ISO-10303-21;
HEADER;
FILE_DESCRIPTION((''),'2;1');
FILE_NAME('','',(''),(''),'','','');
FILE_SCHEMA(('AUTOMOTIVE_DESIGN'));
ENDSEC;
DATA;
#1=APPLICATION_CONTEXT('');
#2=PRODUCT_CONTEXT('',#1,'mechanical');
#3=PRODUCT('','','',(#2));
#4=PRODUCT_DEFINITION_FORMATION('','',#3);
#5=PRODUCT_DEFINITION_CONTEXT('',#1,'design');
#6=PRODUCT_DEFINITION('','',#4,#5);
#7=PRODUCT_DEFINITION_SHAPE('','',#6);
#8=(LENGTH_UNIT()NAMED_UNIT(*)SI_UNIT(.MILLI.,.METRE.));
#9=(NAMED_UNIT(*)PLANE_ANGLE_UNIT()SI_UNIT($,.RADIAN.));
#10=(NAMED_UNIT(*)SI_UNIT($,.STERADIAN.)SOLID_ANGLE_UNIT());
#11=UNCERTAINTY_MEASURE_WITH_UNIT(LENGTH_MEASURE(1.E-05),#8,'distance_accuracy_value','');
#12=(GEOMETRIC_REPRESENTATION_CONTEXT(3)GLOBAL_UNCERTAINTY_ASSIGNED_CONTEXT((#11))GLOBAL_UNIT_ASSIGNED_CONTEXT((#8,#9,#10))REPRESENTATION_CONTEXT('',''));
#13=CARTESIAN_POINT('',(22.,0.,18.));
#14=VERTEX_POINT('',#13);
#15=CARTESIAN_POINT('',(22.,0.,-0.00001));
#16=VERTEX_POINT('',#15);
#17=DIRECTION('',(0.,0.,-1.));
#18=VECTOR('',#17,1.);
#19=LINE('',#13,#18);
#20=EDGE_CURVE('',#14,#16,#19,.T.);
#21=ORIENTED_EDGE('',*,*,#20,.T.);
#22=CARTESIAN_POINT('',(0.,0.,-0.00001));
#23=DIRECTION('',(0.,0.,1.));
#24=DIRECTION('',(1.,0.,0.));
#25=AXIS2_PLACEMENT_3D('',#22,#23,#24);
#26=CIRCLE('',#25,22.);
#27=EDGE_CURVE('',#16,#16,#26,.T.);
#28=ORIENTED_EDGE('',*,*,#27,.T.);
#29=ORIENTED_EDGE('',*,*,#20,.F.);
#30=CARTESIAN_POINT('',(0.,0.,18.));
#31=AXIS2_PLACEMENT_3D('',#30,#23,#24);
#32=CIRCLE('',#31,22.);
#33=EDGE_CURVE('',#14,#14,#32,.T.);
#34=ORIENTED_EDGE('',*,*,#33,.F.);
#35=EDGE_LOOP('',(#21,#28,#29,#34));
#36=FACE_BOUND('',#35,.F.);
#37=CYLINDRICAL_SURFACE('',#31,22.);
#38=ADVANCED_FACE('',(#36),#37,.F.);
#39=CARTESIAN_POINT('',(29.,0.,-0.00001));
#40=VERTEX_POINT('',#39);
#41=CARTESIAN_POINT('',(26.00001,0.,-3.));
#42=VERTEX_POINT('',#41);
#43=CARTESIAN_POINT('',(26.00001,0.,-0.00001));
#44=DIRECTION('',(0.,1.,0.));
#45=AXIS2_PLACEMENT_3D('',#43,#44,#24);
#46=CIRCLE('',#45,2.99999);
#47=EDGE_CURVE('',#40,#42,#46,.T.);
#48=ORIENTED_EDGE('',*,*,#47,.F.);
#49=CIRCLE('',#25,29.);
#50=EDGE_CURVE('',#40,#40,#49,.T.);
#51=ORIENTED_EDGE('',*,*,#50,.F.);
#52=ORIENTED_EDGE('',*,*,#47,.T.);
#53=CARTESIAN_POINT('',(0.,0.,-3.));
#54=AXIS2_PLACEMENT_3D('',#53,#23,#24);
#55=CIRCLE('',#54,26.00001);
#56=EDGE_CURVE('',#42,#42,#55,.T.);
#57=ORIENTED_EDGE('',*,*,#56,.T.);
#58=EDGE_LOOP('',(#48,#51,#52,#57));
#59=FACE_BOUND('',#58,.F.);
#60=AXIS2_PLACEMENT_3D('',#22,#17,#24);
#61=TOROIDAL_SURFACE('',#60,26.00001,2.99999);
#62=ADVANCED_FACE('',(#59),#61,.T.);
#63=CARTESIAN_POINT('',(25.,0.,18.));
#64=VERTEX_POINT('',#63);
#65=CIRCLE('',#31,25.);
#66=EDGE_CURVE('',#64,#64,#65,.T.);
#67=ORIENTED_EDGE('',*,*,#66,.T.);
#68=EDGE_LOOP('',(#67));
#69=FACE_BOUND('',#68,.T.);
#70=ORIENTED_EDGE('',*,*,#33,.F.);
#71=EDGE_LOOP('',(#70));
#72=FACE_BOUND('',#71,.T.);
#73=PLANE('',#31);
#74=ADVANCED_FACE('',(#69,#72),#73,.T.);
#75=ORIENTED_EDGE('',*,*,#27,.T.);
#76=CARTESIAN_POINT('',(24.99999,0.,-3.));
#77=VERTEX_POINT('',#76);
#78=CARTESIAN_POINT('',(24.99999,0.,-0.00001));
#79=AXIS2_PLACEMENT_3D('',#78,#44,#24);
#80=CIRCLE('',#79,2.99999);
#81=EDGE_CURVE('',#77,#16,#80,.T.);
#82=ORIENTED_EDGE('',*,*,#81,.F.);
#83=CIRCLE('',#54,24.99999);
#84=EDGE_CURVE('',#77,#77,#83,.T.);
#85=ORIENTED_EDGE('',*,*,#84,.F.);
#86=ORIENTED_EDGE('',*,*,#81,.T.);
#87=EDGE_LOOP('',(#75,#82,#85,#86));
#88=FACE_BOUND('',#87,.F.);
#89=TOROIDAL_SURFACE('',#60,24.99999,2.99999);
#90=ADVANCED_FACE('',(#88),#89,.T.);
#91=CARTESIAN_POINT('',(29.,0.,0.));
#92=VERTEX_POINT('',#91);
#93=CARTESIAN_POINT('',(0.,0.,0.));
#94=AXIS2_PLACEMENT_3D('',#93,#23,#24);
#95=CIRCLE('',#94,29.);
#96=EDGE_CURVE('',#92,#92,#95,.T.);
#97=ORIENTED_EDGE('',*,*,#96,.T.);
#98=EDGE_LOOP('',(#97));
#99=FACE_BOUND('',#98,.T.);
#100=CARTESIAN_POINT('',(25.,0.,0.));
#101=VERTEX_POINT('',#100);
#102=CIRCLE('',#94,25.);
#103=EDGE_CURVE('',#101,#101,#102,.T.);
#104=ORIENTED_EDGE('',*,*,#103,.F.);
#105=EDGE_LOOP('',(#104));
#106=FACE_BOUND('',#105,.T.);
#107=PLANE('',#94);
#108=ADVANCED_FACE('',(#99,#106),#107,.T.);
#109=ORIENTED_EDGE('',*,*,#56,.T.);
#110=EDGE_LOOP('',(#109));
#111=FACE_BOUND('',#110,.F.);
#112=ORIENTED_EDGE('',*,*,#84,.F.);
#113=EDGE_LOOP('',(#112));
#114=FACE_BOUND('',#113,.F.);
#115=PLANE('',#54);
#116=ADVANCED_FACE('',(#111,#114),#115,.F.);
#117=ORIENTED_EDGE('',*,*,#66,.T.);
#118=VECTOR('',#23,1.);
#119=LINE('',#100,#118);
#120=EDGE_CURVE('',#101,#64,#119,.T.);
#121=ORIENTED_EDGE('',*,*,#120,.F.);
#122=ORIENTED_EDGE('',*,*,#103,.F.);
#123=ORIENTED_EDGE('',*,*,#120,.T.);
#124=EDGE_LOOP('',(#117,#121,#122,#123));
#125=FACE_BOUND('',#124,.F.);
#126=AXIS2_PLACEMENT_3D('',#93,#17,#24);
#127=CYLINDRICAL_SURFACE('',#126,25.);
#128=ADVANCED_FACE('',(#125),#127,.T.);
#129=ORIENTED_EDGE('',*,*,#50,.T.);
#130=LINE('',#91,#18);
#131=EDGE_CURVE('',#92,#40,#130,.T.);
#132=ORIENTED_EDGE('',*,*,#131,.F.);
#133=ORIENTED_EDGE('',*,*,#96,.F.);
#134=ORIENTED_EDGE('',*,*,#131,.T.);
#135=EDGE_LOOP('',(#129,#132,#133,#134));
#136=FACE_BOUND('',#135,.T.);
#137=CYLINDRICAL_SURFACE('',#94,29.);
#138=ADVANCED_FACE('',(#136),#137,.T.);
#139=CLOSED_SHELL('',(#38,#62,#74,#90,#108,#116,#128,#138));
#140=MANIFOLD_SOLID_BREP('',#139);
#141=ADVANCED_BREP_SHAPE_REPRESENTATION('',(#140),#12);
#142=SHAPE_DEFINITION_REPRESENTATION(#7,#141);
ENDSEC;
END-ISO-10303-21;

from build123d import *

# Parameters (mm, degrees)
F0_R     = 25
F1_DEPTH = 18
F2_R     = 29
F3_DEPTH = 3
F4_R     = 22
F5_DEPTH = 21.001
F6_R     = 2.99999


# Not quite as in the source:
# - a fillet or chamfer is up to 0.001 mm smaller than in the source, because OpenCascade refuses the exact size


with BuildPart() as f1:
    # F0 (on Top) → F1 (new body)
    with BuildSketch(Plane.XY):
        Circle(F0_R)
    extrude(amount=F1_DEPTH)

    # F2 (on Top) → F3 (join)
    with BuildSketch(Plane.XY):
        Circle(F2_R)
    extrude(amount=-F3_DEPTH)

    # F4 (on face) → F5 (cut, through all)
    with BuildSketch(Plane.XY.offset(18)):
        Circle(F4_R)
    extrude(amount=-F5_DEPTH, mode=Mode.SUBTRACT)

    # F6 (radius 3 in the source; OpenCascade refuses exactly that, so slightly less here)
    f6_edges = [f1.edges().sort_by_distance(p)[0] for p in [
        (-22, 0, -3),
        (-29, 0, -3),
    ]]
    fillet(f6_edges, radius=F6_R)


solid = f1.part
